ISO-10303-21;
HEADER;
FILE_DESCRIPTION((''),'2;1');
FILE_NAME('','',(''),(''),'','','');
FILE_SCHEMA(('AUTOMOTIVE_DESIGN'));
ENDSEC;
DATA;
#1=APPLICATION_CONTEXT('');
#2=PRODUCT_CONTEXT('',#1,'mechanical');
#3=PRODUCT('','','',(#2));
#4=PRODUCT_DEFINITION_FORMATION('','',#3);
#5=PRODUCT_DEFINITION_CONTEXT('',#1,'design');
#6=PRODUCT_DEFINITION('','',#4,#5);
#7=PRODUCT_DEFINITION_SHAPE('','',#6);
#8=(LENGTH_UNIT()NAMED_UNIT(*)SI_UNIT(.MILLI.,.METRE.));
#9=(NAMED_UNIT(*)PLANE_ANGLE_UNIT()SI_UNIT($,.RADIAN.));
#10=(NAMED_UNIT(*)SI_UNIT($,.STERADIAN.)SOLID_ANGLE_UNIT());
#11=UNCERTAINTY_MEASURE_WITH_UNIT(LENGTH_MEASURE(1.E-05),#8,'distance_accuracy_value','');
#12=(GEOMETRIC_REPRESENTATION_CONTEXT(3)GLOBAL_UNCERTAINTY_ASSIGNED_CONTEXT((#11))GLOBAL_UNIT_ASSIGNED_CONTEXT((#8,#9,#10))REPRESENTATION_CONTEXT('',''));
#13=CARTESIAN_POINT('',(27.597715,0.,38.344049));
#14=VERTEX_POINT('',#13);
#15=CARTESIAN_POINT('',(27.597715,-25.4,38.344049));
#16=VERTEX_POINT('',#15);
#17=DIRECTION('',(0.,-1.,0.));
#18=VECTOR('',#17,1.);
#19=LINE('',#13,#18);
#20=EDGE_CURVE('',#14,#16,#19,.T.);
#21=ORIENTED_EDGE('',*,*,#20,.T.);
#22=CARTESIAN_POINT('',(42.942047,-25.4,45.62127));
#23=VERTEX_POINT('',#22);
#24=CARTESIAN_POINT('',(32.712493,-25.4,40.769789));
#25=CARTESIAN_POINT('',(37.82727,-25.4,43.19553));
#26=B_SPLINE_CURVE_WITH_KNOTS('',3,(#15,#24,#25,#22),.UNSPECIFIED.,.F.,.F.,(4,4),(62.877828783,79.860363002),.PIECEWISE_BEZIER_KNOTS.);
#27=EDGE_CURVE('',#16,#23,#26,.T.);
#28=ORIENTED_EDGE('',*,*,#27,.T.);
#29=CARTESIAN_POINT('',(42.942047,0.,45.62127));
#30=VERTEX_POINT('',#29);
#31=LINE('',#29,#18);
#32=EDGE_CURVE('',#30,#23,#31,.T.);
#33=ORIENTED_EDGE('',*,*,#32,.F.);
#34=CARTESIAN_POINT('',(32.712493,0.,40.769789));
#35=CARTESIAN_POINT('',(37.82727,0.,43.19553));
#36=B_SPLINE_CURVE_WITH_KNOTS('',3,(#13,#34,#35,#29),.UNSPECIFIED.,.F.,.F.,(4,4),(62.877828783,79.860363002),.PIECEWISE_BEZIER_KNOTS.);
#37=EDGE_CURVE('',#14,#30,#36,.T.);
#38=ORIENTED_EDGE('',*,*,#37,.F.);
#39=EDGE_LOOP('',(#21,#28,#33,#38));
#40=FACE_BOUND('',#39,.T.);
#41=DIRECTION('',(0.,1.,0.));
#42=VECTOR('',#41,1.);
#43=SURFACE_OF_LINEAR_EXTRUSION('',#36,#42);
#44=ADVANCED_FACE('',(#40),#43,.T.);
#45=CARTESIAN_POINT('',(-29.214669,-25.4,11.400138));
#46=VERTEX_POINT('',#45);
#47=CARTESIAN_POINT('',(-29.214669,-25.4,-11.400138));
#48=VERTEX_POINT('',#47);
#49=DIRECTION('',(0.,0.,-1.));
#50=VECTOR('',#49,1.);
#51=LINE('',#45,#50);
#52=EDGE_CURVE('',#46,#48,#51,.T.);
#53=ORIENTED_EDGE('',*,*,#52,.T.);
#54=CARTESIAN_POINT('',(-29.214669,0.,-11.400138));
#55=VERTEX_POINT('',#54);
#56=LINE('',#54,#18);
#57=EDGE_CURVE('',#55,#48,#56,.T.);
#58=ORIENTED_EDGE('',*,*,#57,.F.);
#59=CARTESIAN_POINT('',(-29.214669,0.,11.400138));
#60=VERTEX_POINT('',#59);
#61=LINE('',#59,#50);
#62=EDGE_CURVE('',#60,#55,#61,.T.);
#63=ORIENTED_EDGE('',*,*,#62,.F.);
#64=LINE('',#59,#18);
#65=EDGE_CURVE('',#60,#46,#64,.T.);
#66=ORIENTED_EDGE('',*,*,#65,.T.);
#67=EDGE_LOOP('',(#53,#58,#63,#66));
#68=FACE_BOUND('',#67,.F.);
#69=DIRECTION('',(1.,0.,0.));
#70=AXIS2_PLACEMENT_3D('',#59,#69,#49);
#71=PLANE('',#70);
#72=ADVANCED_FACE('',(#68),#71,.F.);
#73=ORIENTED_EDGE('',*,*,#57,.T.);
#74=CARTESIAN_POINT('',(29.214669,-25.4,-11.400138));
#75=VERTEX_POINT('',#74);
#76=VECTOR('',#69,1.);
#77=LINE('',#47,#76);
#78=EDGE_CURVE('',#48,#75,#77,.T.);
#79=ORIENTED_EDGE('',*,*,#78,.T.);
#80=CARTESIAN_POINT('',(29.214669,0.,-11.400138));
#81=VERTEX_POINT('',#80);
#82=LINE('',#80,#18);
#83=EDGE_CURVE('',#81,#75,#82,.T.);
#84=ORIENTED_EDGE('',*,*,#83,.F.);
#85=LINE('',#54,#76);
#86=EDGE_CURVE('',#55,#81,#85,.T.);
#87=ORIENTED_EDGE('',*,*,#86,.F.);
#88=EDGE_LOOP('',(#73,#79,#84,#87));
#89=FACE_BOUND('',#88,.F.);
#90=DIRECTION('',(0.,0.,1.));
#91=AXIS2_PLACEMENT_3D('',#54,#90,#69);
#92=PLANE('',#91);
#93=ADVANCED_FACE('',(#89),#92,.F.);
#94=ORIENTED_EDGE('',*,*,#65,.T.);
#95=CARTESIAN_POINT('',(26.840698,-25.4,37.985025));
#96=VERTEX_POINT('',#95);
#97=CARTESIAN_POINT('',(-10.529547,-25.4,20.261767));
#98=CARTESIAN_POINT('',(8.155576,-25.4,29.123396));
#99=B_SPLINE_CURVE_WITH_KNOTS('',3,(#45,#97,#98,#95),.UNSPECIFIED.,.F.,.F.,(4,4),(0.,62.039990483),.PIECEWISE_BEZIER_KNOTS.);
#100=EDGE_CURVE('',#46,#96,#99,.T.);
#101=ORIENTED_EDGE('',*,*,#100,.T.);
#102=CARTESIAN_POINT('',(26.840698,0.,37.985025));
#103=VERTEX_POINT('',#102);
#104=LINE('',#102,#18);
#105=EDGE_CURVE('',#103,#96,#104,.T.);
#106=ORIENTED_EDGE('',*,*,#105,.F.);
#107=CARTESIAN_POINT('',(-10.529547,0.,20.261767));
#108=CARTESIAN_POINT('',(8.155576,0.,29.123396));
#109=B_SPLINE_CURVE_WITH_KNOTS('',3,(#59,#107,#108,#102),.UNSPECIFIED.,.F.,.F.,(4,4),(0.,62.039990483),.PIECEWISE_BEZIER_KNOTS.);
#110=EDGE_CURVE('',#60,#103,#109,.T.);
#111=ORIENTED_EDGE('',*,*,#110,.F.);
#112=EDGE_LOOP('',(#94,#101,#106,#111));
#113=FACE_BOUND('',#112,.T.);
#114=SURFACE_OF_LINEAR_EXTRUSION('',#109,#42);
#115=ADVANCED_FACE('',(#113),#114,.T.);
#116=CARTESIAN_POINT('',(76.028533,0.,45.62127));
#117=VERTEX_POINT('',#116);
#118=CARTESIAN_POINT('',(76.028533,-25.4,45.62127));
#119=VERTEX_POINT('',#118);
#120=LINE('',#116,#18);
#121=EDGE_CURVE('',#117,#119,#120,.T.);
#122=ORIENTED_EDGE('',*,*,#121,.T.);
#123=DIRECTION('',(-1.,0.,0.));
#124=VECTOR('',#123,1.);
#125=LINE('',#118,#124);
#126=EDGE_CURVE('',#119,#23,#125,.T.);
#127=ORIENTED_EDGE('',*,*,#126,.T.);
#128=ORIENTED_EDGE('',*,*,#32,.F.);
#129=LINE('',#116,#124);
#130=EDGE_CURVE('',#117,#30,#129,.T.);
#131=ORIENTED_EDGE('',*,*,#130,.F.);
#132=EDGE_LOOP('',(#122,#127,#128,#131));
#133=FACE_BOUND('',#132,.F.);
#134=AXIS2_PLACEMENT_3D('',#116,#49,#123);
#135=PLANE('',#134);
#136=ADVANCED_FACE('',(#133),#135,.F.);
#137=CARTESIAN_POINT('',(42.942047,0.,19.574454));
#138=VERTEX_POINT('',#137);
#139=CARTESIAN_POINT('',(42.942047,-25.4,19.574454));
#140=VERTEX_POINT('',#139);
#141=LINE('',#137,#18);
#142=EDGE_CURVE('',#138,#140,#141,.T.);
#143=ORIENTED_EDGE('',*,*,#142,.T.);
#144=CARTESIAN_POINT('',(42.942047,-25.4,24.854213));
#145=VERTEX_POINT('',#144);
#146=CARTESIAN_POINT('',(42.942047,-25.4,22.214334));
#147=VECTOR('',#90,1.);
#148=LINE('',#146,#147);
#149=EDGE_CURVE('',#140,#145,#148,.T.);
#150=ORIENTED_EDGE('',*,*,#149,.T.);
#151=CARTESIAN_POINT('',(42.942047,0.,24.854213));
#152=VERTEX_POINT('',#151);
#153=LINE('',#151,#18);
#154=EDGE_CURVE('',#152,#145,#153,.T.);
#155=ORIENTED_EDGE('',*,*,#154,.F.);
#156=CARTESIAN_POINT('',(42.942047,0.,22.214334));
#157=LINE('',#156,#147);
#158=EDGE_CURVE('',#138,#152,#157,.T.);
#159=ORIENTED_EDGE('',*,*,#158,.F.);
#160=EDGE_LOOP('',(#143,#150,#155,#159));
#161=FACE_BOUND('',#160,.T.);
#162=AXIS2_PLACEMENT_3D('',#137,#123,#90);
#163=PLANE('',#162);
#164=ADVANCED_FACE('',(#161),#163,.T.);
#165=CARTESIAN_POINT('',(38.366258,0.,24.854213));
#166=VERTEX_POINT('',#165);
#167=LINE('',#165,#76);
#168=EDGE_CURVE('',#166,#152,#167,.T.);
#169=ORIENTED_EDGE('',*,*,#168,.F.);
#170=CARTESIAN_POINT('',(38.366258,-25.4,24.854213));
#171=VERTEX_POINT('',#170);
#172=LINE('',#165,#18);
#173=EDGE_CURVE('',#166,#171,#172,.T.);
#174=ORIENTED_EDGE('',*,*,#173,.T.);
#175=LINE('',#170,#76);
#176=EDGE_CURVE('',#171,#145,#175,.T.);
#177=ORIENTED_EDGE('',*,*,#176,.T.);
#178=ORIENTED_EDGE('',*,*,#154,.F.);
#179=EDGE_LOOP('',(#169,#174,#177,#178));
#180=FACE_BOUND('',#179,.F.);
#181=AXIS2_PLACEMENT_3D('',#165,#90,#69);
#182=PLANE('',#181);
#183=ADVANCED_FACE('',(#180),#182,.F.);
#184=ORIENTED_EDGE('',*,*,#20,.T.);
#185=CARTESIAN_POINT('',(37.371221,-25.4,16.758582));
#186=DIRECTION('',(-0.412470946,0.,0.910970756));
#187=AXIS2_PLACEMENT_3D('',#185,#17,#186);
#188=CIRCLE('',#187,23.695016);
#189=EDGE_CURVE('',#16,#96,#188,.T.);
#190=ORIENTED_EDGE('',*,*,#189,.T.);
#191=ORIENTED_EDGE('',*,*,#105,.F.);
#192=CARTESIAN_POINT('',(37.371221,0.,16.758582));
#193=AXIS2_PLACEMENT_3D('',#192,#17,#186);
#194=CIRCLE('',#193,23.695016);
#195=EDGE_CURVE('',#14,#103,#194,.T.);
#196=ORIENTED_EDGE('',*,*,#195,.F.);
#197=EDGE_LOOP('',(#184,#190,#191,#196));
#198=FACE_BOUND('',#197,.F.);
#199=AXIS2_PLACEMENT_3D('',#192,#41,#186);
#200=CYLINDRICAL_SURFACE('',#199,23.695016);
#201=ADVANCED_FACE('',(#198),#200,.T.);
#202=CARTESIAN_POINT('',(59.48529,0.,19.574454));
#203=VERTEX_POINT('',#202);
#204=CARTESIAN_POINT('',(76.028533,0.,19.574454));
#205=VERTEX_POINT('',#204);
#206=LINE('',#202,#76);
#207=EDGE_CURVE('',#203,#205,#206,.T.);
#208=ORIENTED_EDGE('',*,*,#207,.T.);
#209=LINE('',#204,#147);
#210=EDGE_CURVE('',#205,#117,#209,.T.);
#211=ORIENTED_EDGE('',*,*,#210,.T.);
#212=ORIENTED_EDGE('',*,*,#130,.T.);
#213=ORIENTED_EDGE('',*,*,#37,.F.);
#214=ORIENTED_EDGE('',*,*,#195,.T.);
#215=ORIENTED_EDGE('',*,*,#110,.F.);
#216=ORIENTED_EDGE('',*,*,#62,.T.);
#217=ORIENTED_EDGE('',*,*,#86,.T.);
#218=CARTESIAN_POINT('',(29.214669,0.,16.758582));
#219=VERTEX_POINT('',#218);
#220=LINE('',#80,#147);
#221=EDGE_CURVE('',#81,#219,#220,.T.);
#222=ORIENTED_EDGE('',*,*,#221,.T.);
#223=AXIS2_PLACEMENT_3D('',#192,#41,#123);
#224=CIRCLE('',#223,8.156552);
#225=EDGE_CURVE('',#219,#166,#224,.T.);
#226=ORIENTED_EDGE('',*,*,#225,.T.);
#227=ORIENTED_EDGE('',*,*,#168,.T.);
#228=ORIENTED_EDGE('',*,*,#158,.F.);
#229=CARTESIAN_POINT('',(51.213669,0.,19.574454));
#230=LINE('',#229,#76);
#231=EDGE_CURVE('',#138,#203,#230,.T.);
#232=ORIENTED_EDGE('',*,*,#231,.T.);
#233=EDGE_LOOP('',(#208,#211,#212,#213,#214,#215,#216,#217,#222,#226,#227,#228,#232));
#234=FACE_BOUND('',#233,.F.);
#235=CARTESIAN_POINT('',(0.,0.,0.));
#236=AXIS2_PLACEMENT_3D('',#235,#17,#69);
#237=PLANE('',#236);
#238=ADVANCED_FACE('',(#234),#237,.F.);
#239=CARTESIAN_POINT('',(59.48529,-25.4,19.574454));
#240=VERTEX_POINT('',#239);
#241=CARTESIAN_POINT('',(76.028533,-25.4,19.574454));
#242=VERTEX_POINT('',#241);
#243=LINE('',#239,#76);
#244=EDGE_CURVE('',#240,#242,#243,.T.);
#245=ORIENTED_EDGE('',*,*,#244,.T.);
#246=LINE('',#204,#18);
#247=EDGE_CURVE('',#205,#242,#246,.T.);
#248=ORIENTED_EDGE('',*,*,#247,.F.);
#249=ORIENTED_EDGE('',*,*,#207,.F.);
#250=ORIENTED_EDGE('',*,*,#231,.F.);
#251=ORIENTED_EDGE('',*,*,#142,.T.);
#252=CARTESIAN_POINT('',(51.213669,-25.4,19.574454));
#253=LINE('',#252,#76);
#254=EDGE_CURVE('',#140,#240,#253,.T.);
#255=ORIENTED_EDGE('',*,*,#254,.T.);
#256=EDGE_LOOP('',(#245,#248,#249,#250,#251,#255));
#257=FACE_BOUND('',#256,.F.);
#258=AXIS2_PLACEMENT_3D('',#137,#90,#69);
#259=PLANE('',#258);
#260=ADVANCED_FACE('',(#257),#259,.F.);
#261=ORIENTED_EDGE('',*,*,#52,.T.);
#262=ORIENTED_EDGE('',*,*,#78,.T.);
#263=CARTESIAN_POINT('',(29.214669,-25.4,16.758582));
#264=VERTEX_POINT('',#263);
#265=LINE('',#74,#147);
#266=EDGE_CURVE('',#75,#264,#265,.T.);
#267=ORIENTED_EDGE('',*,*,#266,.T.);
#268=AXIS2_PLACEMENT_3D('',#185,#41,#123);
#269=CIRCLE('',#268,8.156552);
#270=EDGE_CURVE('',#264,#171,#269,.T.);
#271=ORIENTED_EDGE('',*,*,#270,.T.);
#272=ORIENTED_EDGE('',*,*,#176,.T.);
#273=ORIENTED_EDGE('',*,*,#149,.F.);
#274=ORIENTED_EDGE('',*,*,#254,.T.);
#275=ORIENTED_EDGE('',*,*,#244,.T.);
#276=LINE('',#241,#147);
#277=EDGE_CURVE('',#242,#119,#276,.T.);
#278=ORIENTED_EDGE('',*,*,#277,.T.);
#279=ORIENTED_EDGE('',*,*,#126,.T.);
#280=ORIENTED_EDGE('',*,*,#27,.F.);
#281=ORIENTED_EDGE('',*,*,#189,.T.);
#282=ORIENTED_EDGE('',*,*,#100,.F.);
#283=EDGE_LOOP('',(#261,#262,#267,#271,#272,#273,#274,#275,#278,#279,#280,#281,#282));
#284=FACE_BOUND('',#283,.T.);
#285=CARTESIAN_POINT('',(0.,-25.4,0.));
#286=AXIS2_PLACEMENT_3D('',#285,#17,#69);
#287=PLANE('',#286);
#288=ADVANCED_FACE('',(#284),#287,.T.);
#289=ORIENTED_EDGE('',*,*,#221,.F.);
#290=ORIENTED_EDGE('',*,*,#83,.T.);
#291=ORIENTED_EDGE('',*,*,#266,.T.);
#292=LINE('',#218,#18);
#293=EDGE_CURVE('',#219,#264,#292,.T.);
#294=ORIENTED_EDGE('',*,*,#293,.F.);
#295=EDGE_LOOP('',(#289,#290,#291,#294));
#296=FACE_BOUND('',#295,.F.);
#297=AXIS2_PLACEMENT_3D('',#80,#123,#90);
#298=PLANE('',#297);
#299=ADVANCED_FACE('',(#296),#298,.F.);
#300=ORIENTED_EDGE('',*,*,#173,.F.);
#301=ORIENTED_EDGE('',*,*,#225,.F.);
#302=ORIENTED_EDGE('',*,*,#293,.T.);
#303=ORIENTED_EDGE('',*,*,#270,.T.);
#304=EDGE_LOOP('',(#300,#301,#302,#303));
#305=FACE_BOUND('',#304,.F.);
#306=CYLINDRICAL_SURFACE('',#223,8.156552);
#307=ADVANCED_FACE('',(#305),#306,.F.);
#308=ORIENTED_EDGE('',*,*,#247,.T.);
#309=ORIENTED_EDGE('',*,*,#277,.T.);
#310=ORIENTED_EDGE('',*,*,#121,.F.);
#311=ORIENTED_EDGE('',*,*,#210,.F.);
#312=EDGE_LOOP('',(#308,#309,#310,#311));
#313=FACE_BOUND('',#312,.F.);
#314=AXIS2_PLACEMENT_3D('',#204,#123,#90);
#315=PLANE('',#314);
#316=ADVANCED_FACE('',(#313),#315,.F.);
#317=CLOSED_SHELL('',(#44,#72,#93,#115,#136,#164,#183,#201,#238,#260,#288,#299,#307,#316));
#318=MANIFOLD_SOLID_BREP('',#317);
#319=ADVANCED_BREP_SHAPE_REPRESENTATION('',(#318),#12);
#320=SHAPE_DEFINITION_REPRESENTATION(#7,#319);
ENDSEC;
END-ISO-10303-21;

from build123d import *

# Parameters (mm, degrees)
F0_W     = 16.5432430804
F0_H     = 5.2285930142
F0_H_2   = 5.2797589451
F0_H_3   = 15.5384643003
F1_DEPTH = 25.4


with BuildPart() as f1:
    # F0 (on Front) → F1 (new body)
    with BuildSketch(Plane.XZ):
        Polygon((-29.214669019, 11.400138028), (-29.214669019, -11.400138028), (29.214669019, -11.400138028), (29.214669019, 11.400138028), (13.6762047186, 11.400138028), align=None)
        with BuildLine():
            add(Edge.make_bspline(
                [(-29.214669019, 11.400138028), (-10.5295465785, 20.2617670077), (8.155575862, 29.1233959875), (26.8406983024, 37.9850249672)],
                knots=[0, 0, 0, 0, 62.0399904828, 62.0399904828, 62.0399904828, 62.0399904828], degree=3))
            Line((-29.214669019, 11.400138028), (13.6762047186, 11.400138028))
            Line((13.6762047186, 11.400138028), (13.6762047186, 16.7585816234))
            ThreePointArc((13.6762047186, 16.7585816234), (17.2345044889, 29.2472343565), (26.8406983024, 37.9850249672))
        make_face()
        with BuildLine():
            Line((13.6762047186, 11.400138028), (29.214669019, 11.400138028))
            Line((29.214669019, 11.400138028), (29.214669019, 16.7585816234))
            ThreePointArc((29.214669019, 16.7585816234), (31.9669047322, 22.8678129764), (38.3662581444, 24.8542129993))
            Line((38.3662581444, 24.8542129993), (42.9420471191, 24.8542129993))
            Line((42.9420471191, 24.8542129993), (42.9420471191, 40.3926772997))
            Line((42.9420471191, 40.3926772997), (39.0692595726, 40.3926772997))
            ThreePointArc((39.0692595726, 40.3926772997), (33.2055864152, 40.0845606606), (27.5977154023, 38.3440488212))
            add(Edge.make_bspline(
                [(26.8406983024, 37.9850249672), (27.0930373357, 38.1046995852), (27.345376369, 38.2243742032), (27.5977154023, 38.3440488212)],
                knots=[62.0399904828, 62.0399904828, 62.0399904828, 62.0399904828, 62.877828783, 62.877828783, 62.877828783, 62.877828783], degree=3))
            ThreePointArc((26.8406983024, 37.9850249672), (17.2345044889, 29.2472343565), (13.6762047186, 16.7585816234))
            Line((13.6762047186, 16.7585816234), (13.6762047186, 11.400138028))
        make_face()
        with BuildLine():
            ThreePointArc((27.5977154023, 38.3440488212), (27.217619876, 38.1678831015), (26.8406983024, 37.9850249672))
            add(Edge.make_bspline(
                [(26.8406983024, 37.9850249672), (27.0930373357, 38.1046995852), (27.345376369, 38.2243742032), (27.5977154023, 38.3440488212)],
                knots=[62.0399904828, 62.0399904828, 62.0399904828, 62.0399904828, 62.877828783, 62.877828783, 62.877828783, 62.877828783], degree=3))
        make_face()
        with BuildLine():
            add(Edge.make_bspline(
                [(27.5977154023, 38.3440488212), (32.7124926413, 40.7697893188), (37.8272698802, 43.1955298163), (42.9420471191, 45.6212703139)],
                knots=[62.877828783, 62.877828783, 62.877828783, 62.877828783, 79.8603630017, 79.8603630017, 79.8603630017, 79.8603630017], degree=3))
            ThreePointArc((27.5977154023, 38.3440488212), (33.2055864152, 40.0845606606), (39.0692595726, 40.3926772997))
            Line((39.0692595726, 40.3926772997), (42.9420471191, 40.3926772997))
            Line((42.9420471191, 40.3926772997), (42.9420471191, 45.6212703139))
        make_face()
        with Locations((51.2136686593, 43.0069738068)):
            Rectangle(F0_W, F0_H)
        with Locations((51.2136686593, 22.2143335268)):
            Rectangle(F0_W, F0_H_2)
        with Locations((51.2136686593, 32.6234451495)):
            Rectangle(F0_W, F0_H_3)
        Polygon((76.0285332799, 45.6212703139), (59.4852901995, 45.6212703139), (59.4852901995, 40.3926772997), (59.4852901995, 24.8542129993), (59.4852901995, 19.5744540542), (76.0285332799, 19.5744540542), align=None)
    extrude(amount=F1_DEPTH)


solid = f1.part
